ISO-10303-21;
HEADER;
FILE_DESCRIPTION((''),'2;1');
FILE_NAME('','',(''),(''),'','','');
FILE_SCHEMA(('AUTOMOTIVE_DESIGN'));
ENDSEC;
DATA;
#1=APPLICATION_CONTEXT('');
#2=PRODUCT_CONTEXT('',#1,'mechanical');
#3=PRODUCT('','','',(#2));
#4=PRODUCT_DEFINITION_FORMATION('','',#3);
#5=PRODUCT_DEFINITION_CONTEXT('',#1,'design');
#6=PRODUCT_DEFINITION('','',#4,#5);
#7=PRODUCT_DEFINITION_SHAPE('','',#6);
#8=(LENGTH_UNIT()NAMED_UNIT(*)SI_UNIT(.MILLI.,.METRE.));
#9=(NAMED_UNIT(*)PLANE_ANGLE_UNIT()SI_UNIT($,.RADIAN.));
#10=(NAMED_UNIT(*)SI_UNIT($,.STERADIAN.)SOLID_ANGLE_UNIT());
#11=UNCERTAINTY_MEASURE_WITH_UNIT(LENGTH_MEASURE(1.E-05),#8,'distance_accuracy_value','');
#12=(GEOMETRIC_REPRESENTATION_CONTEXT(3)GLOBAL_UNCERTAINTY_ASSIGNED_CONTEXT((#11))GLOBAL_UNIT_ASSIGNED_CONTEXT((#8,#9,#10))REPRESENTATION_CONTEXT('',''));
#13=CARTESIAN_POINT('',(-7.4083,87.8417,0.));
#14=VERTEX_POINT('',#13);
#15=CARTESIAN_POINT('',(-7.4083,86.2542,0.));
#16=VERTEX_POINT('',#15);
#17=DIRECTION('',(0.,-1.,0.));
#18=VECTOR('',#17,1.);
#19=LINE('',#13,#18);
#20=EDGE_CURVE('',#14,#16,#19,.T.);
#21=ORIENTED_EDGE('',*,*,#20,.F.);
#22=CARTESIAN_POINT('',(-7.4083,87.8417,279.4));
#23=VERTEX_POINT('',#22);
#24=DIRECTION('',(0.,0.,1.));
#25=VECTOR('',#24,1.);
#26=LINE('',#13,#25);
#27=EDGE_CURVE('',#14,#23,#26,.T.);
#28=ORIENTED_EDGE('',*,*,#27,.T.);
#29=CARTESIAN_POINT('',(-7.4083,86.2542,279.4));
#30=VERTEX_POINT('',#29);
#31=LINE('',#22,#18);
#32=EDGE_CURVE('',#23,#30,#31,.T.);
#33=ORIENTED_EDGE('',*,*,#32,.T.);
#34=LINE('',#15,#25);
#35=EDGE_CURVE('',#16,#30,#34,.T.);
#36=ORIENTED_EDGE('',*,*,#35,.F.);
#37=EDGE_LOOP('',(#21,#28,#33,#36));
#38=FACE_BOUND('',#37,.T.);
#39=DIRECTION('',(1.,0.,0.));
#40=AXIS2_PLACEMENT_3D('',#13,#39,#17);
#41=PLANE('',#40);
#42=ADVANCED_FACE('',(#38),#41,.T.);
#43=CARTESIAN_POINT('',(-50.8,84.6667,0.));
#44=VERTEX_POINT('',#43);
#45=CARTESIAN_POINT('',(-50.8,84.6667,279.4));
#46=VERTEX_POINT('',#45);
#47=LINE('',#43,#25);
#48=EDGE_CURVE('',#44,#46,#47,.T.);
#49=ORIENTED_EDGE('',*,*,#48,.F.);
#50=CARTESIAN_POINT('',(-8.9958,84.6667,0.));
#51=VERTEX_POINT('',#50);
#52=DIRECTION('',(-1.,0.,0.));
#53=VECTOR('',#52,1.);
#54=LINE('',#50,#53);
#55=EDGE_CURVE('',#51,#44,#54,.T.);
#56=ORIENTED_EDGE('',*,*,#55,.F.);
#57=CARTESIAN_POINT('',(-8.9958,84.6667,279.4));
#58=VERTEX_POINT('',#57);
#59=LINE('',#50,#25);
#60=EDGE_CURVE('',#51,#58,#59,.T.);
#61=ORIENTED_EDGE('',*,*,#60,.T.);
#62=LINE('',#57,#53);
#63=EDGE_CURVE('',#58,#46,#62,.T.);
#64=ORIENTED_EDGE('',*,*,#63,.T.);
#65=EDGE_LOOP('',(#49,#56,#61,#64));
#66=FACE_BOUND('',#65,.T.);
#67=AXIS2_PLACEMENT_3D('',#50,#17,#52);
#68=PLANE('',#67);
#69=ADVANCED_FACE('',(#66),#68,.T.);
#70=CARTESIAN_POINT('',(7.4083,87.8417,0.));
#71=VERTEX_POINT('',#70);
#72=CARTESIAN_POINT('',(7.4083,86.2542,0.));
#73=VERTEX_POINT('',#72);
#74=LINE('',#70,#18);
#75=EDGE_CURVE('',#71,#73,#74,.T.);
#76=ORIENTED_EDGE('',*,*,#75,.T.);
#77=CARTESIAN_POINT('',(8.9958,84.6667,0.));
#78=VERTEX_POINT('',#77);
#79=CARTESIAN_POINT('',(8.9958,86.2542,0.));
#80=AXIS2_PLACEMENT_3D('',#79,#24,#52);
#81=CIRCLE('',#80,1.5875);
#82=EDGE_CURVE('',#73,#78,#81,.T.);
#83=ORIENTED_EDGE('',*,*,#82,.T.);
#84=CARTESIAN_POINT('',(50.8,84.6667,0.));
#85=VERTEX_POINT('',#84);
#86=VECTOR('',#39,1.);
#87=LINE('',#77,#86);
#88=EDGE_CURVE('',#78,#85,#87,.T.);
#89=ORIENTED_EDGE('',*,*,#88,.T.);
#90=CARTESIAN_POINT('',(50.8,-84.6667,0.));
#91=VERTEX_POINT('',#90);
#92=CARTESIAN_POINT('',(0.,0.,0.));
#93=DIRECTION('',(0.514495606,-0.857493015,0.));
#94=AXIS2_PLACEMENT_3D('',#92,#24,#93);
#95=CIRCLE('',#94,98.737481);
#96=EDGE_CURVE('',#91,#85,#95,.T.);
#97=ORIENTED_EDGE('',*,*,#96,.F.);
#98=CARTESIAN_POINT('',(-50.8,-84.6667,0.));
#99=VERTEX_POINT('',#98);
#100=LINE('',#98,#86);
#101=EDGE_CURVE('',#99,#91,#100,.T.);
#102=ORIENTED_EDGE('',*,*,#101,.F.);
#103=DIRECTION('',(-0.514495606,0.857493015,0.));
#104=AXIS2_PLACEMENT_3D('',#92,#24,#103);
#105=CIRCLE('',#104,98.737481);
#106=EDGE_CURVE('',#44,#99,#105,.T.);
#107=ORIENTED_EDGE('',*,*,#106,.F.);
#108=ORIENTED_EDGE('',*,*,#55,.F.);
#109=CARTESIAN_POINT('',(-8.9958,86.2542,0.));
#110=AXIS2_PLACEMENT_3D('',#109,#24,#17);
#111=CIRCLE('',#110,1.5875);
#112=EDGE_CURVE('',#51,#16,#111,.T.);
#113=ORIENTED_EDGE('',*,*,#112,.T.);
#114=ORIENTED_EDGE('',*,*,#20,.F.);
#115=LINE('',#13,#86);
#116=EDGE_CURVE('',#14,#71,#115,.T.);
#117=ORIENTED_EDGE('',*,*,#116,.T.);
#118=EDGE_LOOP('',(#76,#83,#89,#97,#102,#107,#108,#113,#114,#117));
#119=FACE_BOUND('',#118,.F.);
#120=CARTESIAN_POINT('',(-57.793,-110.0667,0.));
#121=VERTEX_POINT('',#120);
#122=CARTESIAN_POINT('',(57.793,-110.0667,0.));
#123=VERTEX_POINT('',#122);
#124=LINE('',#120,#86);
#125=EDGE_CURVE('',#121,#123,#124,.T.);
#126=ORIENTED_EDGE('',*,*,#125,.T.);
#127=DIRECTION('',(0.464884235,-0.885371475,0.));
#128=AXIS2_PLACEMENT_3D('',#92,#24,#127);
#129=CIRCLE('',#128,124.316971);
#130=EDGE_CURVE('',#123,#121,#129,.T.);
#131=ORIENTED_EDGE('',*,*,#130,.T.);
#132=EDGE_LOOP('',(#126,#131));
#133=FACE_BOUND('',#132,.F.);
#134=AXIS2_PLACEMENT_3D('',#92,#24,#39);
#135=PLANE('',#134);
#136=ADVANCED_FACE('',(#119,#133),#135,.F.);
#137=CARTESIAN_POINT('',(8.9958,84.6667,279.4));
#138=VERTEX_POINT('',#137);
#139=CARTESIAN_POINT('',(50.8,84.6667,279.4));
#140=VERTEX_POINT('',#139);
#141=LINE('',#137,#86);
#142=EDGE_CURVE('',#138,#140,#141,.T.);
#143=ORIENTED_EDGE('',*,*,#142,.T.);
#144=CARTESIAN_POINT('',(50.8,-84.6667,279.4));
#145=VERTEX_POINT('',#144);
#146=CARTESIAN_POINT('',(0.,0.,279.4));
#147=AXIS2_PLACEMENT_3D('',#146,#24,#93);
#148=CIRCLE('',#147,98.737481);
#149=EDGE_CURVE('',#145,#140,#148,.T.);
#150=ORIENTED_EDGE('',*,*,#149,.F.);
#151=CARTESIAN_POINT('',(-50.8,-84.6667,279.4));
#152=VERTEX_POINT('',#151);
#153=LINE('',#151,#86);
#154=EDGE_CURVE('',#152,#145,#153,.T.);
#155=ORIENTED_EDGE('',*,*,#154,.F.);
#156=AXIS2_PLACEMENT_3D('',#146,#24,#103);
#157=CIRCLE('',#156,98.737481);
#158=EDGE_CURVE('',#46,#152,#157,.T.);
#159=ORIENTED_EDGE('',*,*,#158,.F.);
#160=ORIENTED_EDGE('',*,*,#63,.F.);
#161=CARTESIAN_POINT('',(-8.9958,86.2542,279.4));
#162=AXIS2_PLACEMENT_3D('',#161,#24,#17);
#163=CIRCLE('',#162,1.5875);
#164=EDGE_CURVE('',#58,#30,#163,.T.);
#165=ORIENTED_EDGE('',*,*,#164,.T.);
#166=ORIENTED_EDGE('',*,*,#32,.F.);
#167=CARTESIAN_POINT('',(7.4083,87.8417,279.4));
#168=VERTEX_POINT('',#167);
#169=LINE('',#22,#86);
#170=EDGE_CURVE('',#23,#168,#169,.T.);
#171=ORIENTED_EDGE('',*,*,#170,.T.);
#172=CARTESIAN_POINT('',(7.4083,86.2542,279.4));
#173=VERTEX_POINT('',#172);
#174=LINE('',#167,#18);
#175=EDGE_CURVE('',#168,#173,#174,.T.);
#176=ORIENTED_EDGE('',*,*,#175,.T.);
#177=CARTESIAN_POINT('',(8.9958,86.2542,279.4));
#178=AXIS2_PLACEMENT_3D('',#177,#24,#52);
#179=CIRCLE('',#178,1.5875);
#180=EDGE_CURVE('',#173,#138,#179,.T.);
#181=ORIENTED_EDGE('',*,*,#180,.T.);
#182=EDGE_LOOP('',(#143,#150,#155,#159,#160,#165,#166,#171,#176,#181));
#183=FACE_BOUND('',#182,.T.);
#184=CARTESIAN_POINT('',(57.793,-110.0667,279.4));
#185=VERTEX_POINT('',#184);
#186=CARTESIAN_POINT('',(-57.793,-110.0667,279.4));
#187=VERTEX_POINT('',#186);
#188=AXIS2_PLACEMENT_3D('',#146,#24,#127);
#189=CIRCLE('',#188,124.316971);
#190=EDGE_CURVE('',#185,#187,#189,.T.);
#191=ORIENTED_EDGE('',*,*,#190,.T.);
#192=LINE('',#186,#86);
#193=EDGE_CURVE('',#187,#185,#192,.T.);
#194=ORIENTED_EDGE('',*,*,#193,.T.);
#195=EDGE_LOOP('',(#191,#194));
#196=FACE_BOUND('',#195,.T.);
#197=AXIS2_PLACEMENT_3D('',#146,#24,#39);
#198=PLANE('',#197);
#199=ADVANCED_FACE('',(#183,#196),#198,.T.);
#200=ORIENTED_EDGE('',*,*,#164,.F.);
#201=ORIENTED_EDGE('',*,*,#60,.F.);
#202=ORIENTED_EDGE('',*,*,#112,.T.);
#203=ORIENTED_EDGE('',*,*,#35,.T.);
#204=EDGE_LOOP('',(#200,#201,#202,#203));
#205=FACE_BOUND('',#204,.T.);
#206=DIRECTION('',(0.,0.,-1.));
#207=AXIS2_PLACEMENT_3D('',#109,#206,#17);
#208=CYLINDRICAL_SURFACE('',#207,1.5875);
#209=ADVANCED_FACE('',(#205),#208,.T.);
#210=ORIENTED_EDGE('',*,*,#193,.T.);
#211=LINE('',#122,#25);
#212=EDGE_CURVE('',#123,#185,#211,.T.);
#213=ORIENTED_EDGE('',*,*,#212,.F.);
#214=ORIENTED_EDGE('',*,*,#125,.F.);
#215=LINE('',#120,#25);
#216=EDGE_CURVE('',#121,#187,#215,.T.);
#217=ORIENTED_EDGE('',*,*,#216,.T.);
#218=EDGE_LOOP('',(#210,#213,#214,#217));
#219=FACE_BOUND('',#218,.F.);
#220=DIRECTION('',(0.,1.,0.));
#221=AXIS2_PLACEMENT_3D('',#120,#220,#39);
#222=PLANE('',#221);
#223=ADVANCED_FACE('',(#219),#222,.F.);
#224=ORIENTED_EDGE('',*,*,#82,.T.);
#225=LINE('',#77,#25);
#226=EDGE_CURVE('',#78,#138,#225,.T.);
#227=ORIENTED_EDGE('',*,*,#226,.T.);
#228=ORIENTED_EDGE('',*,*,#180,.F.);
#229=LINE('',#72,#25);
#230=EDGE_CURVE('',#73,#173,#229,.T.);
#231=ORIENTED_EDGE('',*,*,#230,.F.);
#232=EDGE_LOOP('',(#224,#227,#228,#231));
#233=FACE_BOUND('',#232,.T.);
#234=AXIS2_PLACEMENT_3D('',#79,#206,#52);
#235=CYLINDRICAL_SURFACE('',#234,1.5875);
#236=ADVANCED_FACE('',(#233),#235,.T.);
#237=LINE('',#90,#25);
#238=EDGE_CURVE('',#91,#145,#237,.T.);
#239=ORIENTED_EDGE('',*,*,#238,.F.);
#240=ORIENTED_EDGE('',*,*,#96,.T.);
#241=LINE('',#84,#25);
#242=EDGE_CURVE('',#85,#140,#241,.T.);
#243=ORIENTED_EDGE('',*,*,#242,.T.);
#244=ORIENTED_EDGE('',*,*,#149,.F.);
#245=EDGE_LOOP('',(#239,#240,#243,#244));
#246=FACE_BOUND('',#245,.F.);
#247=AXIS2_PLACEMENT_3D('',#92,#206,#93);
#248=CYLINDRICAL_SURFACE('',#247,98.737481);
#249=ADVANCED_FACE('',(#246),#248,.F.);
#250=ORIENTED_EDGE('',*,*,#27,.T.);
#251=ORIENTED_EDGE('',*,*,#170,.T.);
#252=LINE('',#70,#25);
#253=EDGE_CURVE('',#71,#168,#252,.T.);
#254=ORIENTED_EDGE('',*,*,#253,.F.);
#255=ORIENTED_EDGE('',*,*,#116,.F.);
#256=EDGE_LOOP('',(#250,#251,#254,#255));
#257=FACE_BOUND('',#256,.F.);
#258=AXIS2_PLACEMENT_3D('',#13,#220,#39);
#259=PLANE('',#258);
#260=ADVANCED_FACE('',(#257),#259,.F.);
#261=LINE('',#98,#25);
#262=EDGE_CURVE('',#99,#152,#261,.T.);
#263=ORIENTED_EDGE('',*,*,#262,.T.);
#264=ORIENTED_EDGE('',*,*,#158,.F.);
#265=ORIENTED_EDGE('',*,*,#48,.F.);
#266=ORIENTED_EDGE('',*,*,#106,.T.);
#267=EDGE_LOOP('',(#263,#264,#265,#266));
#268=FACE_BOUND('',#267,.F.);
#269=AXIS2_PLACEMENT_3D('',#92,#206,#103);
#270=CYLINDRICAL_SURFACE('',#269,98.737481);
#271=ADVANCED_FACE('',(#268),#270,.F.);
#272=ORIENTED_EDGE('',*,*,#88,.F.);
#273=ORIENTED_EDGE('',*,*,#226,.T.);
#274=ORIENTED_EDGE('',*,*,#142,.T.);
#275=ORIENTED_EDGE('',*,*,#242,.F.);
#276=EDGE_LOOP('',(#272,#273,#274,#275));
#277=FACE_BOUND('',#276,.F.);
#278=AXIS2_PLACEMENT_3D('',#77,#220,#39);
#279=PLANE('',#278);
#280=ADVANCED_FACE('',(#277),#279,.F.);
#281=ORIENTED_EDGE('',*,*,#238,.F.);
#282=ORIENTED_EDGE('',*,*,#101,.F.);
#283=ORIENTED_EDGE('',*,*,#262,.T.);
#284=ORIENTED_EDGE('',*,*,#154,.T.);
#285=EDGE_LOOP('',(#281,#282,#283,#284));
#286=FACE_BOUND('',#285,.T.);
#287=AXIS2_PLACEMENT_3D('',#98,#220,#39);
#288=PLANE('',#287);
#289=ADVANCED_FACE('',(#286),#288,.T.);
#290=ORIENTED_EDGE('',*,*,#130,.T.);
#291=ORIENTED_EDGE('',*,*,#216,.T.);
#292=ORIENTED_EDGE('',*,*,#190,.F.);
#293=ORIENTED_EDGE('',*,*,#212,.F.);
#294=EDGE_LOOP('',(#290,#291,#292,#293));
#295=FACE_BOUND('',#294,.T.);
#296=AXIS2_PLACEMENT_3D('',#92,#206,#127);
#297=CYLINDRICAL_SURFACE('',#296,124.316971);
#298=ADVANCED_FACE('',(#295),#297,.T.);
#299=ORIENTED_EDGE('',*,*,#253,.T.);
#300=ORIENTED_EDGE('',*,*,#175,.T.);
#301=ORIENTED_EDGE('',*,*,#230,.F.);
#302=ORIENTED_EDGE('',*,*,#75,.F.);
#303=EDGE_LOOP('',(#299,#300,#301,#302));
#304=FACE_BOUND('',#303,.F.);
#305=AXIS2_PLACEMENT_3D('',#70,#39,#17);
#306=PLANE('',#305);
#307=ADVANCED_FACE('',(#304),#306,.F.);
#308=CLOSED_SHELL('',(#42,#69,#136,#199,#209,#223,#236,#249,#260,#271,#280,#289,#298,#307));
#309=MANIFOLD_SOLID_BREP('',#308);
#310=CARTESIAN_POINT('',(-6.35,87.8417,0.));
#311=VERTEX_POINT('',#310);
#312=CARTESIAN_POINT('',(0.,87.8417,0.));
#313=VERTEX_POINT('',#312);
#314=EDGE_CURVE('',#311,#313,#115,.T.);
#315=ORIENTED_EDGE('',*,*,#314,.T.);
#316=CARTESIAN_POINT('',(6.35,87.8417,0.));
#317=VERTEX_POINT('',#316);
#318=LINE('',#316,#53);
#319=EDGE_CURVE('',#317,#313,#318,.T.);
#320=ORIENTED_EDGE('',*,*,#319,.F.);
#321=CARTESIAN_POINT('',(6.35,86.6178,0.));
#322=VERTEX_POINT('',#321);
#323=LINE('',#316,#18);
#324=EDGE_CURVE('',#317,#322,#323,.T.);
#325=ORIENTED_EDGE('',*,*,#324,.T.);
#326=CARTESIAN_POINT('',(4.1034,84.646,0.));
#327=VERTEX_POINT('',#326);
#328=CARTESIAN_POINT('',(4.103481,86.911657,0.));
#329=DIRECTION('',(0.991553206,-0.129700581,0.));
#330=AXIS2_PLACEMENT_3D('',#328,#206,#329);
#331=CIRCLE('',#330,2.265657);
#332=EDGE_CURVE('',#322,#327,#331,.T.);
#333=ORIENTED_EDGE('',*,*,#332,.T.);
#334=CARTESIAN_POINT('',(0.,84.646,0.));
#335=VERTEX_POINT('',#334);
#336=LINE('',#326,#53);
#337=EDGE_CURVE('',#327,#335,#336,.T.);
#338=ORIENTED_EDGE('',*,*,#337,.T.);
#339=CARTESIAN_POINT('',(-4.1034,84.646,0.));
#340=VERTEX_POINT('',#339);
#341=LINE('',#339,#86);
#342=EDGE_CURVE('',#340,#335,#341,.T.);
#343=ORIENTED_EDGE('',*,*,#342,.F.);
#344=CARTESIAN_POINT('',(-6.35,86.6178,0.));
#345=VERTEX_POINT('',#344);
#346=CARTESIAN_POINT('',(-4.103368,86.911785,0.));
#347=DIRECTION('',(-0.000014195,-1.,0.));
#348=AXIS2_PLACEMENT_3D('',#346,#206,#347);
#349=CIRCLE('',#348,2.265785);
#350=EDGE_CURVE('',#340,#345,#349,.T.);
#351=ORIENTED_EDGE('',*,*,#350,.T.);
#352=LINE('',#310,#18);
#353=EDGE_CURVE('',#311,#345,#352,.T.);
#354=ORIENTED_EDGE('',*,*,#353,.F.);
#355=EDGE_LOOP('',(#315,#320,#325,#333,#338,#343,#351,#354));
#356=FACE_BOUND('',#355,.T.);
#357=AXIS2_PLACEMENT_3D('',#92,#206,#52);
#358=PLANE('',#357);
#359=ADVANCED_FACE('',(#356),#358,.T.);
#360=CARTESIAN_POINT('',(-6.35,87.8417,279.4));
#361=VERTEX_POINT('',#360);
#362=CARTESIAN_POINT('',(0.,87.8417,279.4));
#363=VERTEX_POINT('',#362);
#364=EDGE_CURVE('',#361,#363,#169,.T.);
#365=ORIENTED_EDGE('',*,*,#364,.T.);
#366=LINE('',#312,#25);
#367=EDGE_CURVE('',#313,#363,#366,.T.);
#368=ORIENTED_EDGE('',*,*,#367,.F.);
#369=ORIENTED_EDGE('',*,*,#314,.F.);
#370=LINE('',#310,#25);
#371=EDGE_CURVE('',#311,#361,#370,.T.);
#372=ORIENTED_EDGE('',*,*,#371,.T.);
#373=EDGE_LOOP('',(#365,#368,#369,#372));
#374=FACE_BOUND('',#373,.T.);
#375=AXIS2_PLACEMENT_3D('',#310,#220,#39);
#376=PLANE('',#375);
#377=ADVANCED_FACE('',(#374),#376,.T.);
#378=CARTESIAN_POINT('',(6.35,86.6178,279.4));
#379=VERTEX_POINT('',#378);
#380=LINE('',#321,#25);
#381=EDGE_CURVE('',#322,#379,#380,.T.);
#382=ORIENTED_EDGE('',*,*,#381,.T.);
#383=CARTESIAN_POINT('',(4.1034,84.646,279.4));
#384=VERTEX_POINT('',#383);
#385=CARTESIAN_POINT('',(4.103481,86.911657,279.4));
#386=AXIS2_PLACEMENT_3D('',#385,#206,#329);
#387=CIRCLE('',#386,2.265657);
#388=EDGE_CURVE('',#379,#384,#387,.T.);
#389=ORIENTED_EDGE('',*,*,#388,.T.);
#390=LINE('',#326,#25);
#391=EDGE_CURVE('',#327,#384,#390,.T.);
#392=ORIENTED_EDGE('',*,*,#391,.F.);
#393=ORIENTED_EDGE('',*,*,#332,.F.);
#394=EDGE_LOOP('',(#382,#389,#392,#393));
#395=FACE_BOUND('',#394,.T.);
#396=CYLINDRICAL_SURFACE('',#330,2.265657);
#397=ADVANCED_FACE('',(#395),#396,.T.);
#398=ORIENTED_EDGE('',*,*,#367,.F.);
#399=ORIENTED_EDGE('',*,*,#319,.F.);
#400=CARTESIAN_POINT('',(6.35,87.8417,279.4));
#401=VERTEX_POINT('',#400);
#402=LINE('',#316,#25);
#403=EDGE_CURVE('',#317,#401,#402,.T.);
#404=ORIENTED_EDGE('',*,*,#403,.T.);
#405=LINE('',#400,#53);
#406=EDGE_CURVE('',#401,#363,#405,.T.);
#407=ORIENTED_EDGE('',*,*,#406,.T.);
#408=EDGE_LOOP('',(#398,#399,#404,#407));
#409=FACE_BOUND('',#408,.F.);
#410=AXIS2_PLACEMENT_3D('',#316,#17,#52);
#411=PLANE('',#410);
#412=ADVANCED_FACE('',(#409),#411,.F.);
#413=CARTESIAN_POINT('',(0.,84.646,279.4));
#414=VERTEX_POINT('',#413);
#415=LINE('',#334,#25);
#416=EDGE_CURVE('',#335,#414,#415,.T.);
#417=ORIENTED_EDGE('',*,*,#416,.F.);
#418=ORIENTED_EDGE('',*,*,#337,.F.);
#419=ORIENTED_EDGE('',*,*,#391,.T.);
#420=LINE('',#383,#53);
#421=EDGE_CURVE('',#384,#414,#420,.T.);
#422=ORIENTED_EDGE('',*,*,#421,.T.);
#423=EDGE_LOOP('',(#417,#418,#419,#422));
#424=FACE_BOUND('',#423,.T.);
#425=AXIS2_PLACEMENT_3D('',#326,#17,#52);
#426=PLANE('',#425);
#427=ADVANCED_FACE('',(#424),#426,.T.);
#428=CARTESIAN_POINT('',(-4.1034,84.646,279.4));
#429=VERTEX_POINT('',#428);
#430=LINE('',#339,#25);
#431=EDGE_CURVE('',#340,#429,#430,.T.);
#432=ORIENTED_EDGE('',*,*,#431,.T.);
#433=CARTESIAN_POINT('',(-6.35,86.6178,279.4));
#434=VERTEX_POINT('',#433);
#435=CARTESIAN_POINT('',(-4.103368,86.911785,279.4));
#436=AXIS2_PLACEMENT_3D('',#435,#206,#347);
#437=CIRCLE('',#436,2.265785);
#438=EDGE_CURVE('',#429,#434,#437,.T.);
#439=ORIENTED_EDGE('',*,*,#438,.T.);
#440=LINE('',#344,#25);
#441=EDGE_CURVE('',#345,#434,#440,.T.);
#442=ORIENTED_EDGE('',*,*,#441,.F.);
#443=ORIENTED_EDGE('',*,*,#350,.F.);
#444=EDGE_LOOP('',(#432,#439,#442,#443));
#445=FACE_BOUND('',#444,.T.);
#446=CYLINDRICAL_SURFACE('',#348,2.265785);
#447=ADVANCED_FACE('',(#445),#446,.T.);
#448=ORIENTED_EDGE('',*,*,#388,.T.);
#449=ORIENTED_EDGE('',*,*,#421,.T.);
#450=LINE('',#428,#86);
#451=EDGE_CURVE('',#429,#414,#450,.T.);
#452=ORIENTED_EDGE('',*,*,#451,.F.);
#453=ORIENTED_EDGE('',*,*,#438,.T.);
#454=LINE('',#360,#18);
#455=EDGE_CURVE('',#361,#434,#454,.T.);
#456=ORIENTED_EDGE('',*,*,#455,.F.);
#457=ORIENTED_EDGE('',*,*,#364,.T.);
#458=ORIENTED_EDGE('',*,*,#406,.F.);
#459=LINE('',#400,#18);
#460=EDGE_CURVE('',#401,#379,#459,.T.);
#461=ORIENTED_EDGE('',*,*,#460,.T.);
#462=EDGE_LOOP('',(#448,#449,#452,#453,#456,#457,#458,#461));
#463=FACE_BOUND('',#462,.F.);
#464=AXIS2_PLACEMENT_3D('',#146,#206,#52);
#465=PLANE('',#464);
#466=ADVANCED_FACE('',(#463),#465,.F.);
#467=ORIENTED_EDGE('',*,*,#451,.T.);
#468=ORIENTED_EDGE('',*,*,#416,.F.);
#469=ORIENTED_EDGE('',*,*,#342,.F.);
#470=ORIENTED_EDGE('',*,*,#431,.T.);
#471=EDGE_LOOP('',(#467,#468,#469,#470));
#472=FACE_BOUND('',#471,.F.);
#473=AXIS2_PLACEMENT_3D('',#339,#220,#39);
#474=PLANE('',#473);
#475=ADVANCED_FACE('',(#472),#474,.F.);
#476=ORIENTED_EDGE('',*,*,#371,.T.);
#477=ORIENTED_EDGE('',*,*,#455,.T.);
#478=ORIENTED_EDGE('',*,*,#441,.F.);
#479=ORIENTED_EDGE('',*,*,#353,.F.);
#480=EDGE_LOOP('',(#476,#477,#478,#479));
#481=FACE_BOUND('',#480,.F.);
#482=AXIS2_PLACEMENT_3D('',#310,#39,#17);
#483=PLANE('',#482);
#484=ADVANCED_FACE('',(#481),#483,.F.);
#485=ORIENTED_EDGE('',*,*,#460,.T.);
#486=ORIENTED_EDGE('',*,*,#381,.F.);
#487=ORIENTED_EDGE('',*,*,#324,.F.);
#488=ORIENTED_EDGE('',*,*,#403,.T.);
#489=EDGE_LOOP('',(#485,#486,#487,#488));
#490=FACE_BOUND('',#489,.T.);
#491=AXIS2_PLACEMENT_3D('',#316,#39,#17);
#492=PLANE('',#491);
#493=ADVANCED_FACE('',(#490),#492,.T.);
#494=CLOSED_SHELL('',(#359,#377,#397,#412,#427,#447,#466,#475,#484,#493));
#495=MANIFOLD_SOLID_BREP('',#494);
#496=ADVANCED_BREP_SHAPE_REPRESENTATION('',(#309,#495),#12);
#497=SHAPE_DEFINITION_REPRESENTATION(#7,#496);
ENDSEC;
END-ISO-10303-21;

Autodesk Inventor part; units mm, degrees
ref_plane "YZ Plane" through (0, 0, 0) normal (1, 0, 0) x (0, 1, 0)
ref_plane "XZ Plane" through (0, 0, 0) normal (0, 1, 0) x (-1, 0, 0)
ref_plane "XY Plane" through (0, 0, 0) normal (0, 0, 1) x (1, 0, 0)
sketch "Sketch1" plane through (0, 0, 0) normal (0, 0, 1) x (1, 0, 0)
  line L0 (-50.8, -84.6667) -> (50.8, -84.6667)
  arc A0 (57.793, -110.0667) -> (-57.793, -110.0667) centre (0, 0) ccw
  arc A1 (-50.8, 84.6667) -> (-50.8, -84.6667) centre (0, 0) ccw
  arc A2 (50.8, -84.6667) -> (50.8, 84.6667) centre (0, 0) ccw
  line L1 (-57.793, -110.0667) -> (57.793, -110.0667)
  line L2 (0, 84.6667) -> (0, 87.8417) construction
  line L3 (-7.4083, 87.8417) -> (7.4083, 87.8417)
  line L4 (-7.4083, 87.8417) -> (-7.4083, 86.2542)
  line L5 (7.4083, 87.8417) -> (7.4083, 86.2542)
  line L6 (8.9958, 84.6667) -> (50.8, 84.6667)
  line L7 (-8.9958, 84.6667) -> (8.9958, 84.6667) construction
  arc A3 (7.4083, 86.2542) -> (8.9958, 84.6667) centre (8.9958, 86.2542) ccw
  arc A4 (-8.9958, 84.6667) -> (-7.4083, 86.2542) centre (-8.9958, 86.2542) ccw
  line L8 (-8.9958, 84.6667) -> (-50.8, 84.6667)
  dimension "d1" = 101.6
  dimension "d20" = 25.4
  dimension "d21" = 124.3169
  dimension "d23" = 14.8167
  dimension "d27" = 98.7374
  dimension "d28" = 98.7374
  dimension "d30" = 43.3917
  dimension "d39" = 1.5875
  dimension "d40" = 1.5875
  dimension "d41" = 41.8042
  dimension "d44" = 3.175
extrude "corridor" add sketch "Sketch1" along normal blind 279.4
sketch "Sketch5" plane through (0, 0, 0) normal (0, 0, -1) x (-1, 0, 0)
  line L0 (-6.35, 87.8417) -> (0, 87.8417)
  line L1 (7.4083, 87.8417) -> (-7.4083, 87.8417) projected
  line L2 (-6.35, 87.8417) -> (-6.35, 86.6178)
  line L3 (-4.1034, 84.646) -> (0, 84.646)
  line L4 (0, 84.646) -> (0, 87.8417) construction
  line L5 (-6.3485, 84.6667) -> (-3.1743, 87.8409) construction
  arc A0 (-3.1736, 84.646) -> (-6.35, 87.8417) centre (-6.3485, 84.6667) ccw construction
  arc A1 (-6.35, 86.6178) -> (-4.1034, 84.646) centre (-4.1034, 86.9117) ccw
  line L6 (6.35, 87.8417) -> (0, 87.8417)
  line L7 (6.35, 87.8417) -> (6.35, 86.6178)
  line L8 (4.1034, 84.646) -> (0, 84.646)
  line L9 (6.3485, 84.6667) -> (3.1743, 87.8409) construction
  arc A2 (6.35, 87.8417) -> (3.1736, 84.646) centre (6.3485, 84.6667) ccw construction
  arc A3 (4.1034, 84.646) -> (6.35, 86.6178) centre (4.1034, 86.9117) ccw
  point P0 (0, 0)
  dimension "d31" = 6.35
  dimension "d32" = 3.175
  dimension "d34" = 45
  dimension "d35" = 2.2657
  dimension "d36" = 2.2466
extrude "light" add sketch "Sketch5" against normal up to surface (279.4 mm away) separate body
equation "\"d28\" = d27"
equation "\"d39\" = 0.5 * d26"
equation "\"d26\" = 3.175"
properties part number "corridor"
